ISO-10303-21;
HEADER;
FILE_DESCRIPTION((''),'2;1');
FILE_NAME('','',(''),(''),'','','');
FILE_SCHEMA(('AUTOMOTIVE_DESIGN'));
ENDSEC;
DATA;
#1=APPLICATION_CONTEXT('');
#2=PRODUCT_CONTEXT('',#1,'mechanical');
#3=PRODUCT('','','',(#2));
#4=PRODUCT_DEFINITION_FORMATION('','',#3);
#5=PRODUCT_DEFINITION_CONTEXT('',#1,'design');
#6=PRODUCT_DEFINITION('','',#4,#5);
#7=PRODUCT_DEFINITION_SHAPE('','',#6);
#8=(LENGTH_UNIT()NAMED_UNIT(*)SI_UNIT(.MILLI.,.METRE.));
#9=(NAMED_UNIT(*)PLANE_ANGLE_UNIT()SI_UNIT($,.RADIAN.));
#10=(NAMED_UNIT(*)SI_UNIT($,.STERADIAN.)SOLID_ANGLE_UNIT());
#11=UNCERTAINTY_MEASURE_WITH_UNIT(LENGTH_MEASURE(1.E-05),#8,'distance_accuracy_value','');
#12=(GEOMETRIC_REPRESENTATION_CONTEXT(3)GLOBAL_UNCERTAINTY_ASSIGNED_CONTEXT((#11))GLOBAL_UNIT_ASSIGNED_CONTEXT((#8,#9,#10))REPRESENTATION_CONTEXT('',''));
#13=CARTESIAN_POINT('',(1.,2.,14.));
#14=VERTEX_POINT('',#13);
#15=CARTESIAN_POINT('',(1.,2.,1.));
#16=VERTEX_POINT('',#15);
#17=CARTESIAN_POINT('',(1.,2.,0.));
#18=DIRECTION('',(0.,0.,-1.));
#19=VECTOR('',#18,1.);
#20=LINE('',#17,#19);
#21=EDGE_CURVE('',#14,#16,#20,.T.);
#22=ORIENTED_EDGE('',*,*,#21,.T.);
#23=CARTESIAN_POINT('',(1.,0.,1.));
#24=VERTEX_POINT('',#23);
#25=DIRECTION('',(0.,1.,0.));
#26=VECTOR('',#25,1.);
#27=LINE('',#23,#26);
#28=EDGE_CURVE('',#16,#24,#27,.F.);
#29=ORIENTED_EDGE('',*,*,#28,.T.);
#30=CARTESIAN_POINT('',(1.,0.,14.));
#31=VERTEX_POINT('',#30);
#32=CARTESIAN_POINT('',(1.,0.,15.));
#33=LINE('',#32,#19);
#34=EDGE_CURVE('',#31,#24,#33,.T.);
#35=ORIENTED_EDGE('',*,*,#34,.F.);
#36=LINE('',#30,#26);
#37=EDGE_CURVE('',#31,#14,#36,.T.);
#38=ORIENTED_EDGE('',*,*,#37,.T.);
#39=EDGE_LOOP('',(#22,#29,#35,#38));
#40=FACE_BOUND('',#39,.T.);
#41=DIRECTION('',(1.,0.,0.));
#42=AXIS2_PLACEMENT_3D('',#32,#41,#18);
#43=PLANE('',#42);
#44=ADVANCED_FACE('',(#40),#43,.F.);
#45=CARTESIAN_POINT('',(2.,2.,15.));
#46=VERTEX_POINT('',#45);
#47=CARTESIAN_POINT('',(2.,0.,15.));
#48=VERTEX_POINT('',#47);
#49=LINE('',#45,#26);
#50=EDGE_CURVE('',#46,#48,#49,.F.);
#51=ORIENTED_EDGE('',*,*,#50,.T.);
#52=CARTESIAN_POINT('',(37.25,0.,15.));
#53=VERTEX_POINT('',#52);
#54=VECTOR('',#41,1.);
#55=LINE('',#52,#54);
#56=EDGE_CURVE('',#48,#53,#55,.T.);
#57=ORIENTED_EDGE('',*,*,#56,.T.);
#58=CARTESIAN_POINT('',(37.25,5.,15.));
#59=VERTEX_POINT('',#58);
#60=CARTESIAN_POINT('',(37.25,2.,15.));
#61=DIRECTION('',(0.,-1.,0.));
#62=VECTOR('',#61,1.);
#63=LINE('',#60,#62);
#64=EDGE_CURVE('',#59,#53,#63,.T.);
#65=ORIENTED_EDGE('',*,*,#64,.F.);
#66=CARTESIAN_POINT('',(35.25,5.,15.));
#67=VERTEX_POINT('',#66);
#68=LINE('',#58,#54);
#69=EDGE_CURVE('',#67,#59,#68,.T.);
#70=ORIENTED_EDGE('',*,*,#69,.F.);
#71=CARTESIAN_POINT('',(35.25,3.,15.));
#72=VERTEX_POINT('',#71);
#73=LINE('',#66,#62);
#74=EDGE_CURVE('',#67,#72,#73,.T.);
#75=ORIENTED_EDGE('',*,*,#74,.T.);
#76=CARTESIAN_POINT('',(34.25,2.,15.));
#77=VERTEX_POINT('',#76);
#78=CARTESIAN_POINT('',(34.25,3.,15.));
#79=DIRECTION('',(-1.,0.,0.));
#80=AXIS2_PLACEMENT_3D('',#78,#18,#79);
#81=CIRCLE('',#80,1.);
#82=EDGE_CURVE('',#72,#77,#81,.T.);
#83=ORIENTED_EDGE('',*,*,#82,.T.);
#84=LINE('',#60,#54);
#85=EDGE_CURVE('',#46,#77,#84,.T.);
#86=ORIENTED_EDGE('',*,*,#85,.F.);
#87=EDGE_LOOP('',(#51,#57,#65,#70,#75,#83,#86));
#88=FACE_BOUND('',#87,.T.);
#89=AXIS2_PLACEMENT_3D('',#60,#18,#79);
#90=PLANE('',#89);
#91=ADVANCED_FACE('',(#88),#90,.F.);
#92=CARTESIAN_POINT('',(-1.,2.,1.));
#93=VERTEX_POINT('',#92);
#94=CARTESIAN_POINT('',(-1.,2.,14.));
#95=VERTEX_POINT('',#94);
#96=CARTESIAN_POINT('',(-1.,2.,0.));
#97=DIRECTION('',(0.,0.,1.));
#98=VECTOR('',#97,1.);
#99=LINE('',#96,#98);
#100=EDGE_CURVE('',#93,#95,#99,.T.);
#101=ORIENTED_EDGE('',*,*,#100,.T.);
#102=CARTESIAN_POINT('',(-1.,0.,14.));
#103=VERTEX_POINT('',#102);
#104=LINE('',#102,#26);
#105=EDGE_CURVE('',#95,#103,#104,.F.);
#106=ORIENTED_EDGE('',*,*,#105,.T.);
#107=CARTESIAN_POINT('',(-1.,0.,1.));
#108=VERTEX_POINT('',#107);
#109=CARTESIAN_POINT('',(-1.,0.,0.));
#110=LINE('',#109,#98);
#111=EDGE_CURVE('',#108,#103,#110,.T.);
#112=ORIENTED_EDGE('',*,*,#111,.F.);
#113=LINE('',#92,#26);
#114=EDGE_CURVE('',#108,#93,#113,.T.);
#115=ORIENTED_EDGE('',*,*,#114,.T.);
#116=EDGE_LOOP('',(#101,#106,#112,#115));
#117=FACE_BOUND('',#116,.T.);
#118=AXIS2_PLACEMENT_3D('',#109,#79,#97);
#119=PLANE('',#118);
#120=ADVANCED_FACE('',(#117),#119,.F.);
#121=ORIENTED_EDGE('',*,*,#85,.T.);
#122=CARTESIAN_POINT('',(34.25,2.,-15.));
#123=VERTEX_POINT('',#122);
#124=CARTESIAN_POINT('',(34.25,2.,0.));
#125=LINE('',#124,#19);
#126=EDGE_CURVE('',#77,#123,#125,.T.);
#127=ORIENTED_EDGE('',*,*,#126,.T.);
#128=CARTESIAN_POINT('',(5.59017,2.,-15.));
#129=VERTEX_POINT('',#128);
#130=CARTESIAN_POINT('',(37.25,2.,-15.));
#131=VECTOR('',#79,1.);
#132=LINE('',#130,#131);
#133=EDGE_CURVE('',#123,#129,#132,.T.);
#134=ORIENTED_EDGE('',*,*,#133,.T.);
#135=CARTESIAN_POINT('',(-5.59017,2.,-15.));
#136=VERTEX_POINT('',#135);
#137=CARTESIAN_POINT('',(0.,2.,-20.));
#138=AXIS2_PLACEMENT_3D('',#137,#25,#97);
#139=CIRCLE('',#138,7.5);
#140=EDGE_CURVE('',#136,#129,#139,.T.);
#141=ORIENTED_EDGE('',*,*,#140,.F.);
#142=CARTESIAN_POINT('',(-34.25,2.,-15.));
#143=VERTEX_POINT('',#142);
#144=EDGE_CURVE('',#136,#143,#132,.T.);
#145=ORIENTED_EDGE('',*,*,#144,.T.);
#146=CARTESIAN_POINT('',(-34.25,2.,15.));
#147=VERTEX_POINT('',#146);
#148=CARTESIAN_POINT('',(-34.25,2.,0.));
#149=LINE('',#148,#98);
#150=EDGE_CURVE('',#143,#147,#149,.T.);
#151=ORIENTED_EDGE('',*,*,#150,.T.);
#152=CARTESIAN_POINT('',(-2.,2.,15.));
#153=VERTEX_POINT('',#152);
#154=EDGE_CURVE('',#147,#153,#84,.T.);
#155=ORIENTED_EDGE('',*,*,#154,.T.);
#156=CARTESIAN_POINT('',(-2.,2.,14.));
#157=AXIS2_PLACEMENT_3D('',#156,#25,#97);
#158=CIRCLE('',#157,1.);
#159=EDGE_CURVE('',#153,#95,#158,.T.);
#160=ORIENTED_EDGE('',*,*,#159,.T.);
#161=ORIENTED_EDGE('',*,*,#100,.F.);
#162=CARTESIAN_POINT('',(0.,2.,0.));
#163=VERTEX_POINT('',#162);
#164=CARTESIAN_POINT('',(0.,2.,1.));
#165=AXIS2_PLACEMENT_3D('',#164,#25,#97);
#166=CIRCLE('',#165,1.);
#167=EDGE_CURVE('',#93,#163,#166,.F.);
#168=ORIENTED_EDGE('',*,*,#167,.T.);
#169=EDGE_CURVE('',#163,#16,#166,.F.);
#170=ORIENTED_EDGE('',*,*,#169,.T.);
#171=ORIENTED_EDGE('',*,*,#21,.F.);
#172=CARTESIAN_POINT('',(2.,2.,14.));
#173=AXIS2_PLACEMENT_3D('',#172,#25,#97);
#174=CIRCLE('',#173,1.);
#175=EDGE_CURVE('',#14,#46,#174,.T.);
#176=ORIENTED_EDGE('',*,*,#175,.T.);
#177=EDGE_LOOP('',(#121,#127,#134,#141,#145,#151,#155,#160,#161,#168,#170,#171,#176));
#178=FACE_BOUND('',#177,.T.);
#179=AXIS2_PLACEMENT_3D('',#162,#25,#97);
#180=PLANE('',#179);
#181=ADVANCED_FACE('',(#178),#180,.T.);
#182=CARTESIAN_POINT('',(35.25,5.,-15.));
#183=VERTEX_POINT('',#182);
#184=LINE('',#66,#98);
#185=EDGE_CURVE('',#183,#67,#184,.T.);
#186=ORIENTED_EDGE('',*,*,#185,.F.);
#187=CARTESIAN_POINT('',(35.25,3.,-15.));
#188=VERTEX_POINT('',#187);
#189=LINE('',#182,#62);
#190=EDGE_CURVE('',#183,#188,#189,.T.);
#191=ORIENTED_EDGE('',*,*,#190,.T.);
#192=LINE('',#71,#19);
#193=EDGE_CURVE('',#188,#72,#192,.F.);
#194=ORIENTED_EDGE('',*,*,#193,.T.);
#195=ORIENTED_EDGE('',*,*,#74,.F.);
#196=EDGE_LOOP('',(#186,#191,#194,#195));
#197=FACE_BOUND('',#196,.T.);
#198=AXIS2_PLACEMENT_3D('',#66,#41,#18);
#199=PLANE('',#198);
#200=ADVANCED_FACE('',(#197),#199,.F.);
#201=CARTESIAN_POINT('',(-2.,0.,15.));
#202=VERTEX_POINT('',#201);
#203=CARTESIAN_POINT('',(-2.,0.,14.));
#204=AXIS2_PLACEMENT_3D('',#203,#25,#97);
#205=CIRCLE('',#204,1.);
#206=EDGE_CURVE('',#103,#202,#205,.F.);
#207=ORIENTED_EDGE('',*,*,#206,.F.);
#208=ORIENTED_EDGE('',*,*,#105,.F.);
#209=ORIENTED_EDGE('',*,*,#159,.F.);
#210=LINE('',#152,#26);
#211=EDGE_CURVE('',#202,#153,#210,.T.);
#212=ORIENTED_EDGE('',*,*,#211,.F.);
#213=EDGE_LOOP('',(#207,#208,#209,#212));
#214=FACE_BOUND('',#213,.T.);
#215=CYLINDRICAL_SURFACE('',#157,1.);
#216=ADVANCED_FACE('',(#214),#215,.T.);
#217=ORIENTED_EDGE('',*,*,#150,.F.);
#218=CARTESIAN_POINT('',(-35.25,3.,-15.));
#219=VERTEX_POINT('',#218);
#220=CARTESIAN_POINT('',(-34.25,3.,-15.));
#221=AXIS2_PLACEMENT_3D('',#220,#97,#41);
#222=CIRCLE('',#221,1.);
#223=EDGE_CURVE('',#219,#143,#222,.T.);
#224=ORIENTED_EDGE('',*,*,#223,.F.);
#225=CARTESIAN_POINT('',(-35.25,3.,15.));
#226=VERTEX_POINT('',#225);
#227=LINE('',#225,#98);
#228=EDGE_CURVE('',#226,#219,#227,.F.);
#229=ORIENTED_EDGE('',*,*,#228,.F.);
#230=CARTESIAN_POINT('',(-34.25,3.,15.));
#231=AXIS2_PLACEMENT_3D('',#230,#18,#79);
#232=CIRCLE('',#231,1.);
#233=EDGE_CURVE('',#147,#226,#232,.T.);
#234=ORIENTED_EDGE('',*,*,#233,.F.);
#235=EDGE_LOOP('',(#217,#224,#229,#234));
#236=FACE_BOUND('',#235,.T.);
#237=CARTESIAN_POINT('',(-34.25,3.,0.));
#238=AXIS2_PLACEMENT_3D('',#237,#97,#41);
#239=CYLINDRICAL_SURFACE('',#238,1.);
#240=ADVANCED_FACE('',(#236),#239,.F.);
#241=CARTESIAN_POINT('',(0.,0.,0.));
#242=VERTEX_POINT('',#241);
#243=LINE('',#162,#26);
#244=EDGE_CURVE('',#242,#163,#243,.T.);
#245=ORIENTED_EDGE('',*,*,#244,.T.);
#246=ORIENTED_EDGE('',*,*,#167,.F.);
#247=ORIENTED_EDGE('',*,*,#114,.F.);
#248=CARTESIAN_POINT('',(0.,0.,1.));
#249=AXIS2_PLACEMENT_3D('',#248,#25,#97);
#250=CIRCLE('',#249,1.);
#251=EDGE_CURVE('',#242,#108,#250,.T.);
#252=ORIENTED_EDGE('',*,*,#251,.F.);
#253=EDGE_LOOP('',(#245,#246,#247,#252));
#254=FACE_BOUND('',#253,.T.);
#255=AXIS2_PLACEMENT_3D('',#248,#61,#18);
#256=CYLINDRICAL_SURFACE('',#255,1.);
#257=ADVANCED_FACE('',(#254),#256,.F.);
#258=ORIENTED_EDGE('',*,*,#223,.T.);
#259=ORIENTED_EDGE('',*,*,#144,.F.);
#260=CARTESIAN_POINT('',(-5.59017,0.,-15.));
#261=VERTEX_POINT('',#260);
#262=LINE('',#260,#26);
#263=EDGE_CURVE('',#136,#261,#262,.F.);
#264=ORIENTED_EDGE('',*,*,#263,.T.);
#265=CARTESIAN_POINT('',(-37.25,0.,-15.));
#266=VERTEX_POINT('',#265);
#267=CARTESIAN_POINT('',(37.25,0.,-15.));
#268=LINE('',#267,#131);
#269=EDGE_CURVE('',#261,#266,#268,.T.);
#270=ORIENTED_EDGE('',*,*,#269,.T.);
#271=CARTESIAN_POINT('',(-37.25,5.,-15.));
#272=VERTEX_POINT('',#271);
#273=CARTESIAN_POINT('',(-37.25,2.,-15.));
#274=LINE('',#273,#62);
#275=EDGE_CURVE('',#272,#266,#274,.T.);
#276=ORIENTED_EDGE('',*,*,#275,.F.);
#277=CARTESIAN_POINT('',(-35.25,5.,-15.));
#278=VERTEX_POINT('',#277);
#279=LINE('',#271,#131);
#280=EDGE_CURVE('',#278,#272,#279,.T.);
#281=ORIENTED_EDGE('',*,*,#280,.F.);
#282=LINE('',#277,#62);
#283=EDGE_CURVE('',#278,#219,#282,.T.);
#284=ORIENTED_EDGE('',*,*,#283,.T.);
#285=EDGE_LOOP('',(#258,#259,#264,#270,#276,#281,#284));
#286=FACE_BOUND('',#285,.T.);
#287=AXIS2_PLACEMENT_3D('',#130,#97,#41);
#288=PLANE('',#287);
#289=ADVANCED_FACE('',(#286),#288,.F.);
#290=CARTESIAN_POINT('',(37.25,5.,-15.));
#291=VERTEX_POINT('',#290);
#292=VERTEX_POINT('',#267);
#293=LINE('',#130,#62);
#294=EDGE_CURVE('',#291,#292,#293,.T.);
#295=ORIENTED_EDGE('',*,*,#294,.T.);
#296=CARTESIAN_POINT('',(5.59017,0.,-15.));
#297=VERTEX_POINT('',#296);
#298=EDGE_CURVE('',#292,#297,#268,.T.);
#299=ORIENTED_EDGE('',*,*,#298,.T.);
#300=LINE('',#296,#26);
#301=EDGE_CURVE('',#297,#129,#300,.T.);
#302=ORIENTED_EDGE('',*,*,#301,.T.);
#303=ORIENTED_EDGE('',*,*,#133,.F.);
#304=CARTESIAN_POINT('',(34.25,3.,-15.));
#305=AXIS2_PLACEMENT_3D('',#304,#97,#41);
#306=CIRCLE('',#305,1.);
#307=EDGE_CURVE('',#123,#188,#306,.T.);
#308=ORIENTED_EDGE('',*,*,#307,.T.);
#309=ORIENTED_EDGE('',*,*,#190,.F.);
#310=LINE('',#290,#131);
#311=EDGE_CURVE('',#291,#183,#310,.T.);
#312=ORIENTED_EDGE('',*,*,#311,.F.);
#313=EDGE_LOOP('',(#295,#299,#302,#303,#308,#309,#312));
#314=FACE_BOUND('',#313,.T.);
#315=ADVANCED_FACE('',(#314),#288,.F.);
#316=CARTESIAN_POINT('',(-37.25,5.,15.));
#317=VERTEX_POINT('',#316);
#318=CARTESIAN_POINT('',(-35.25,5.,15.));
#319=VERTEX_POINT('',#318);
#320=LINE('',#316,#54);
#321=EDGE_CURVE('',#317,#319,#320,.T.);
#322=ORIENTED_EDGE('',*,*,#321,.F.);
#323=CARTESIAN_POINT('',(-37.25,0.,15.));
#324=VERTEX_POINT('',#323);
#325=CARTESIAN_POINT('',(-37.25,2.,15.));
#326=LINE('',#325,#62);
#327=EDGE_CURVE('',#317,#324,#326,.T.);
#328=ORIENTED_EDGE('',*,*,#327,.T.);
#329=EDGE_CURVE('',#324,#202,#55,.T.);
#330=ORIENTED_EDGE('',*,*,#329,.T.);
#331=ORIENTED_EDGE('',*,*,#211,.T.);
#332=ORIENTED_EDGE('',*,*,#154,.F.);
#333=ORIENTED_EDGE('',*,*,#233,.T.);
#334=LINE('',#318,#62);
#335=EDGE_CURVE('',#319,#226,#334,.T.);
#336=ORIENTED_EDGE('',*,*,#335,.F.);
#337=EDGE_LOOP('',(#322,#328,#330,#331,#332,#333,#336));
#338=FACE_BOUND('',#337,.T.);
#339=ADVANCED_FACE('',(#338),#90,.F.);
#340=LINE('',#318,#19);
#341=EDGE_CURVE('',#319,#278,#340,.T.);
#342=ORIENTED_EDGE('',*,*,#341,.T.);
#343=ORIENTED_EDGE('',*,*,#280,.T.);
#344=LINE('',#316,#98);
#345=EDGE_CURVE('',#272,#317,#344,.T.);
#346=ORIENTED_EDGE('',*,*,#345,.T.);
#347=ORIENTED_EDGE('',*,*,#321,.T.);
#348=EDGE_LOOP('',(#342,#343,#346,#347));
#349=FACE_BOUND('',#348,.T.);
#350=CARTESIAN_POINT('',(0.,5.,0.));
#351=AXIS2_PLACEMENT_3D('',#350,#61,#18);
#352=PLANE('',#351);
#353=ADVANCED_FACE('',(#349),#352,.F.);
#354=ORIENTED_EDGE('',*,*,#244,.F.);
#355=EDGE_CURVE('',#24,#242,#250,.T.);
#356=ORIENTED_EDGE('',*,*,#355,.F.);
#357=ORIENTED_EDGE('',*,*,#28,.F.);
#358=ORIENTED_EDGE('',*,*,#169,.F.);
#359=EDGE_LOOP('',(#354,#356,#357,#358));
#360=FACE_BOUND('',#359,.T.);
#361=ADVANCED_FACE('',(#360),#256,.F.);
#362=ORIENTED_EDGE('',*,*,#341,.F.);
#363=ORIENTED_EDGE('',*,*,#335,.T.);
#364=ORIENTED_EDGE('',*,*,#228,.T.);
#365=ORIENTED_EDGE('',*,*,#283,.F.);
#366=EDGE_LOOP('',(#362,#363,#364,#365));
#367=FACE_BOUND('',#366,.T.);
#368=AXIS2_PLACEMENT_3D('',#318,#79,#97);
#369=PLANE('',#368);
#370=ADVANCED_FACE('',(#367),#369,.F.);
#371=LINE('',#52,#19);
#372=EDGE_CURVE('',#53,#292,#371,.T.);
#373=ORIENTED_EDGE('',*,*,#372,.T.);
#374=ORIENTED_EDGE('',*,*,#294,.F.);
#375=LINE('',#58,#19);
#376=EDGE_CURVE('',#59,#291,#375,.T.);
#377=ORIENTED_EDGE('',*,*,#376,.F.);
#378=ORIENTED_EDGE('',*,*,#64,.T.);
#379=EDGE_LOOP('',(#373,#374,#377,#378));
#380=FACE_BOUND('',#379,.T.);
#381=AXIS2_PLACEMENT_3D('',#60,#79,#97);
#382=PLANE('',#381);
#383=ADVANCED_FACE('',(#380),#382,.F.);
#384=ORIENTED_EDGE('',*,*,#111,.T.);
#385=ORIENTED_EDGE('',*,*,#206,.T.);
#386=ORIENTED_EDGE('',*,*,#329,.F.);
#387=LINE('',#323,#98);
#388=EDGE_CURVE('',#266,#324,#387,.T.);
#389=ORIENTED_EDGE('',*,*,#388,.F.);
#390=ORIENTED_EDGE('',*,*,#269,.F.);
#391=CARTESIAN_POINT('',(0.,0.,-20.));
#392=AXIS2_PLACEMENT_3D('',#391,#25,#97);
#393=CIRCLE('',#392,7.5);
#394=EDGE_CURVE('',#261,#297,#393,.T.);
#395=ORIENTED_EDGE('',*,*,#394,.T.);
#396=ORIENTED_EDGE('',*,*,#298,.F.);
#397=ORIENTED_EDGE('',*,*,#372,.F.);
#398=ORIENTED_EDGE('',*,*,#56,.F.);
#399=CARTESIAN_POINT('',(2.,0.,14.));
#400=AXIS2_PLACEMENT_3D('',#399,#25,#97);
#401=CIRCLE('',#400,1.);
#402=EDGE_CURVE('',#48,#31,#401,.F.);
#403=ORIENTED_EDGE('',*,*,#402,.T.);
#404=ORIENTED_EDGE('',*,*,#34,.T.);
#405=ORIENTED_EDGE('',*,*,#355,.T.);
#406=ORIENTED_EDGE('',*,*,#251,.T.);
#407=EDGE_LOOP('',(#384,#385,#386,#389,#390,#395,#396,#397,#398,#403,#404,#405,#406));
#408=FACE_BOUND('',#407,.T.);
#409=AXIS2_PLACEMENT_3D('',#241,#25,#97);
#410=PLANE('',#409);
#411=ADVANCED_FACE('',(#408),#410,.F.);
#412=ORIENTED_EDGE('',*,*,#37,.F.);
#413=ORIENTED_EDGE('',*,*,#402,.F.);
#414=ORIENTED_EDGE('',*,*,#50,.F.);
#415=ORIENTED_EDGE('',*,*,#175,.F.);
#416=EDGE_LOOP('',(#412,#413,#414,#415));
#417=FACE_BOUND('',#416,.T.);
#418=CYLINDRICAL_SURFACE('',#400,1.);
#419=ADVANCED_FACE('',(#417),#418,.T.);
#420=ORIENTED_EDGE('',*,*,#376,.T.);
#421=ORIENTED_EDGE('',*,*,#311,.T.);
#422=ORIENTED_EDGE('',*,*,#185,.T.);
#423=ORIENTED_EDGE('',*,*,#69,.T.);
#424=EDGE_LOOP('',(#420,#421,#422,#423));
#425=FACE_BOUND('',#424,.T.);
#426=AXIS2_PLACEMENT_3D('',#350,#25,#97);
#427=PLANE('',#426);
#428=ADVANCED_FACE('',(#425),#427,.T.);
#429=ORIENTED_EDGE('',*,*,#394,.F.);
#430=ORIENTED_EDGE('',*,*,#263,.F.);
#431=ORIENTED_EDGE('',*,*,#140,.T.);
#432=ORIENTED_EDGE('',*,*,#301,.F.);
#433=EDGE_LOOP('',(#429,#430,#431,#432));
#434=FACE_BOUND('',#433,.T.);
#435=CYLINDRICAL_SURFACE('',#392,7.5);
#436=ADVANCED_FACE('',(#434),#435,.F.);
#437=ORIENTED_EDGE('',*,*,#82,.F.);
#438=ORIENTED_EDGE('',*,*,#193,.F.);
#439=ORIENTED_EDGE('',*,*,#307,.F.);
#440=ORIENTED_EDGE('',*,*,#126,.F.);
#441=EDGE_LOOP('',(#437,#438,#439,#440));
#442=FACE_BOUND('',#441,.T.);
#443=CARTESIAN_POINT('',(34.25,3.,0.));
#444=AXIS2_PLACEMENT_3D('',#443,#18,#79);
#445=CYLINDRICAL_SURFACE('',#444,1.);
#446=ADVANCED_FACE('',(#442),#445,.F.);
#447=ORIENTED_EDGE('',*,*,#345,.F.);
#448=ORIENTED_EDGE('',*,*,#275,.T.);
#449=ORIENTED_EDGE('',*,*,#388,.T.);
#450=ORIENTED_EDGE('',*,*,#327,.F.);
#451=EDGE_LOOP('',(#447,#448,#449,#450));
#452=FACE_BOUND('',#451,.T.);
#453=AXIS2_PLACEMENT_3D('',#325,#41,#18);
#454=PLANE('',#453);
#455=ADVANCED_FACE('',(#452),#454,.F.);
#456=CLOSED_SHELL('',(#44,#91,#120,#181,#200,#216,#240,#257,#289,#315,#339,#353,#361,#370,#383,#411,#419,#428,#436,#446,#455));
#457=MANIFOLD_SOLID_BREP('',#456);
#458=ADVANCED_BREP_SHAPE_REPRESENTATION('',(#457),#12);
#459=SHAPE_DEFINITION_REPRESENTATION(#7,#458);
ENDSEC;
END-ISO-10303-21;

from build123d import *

# Parameters (mm, degrees)
SKETCH1_W               = 74.5
SKETCH1_H               = 30
BOSS_EXTRUDE1_DEPTH     = 2
SKETCH4_W               = 2
SKETCH4_H               = 30
BOSS_EXTRUDE2_DEPTH     = 5
CUT_EXTRUDE1_DEPTH      = 41.268629229
CUT_EXTRUDE1_DEPTH_BACK = 41.268629229
SKETCH5_W               = 2
SKETCH5_H               = 15
CUT_EXTRUDE2_DEPTH      = 41.268629229
CUT_EXTRUDE2_DEPTH_BACK = 41.268629229
SKETCH6_R               = 7.5
FILLET1_R               = 1


with BuildPart() as part:
    # Sketch1 → Boss-Extrude1 (new body)
    with BuildSketch(Plane(origin=(0, 0, 0), x_dir=(1, 0, 0), z_dir=(0, 1, 0))):
        Rectangle(SKETCH1_W, SKETCH1_H)
    extrude(amount=BOSS_EXTRUDE1_DEPTH)

    # Sketch4 → Boss-Extrude2 (add)
    with BuildSketch(Plane(origin=(0, 0, 0), x_dir=(1, 0, 0), z_dir=(0, 1, 0))):
        with Locations((36.25, 0)):
            Rectangle(SKETCH4_W, SKETCH4_H)
        with Locations((-36.25, 0)):
            Rectangle(SKETCH4_W, SKETCH4_H)
    extrude(amount=BOSS_EXTRUDE2_DEPTH)

    # Sketch5 → Cut-Extrude1 (cut, two sides: drawn at the far end of the back side and taken through both)
    with BuildSketch(Plane(origin=(0, 2, 0), x_dir=(1, 0, 0), z_dir=(0, 1, 0)).offset(-CUT_EXTRUDE1_DEPTH_BACK)):
        with Locations((0, -7.5)):
            Rectangle(SKETCH5_W, SKETCH5_H)
    extrude(amount=CUT_EXTRUDE1_DEPTH + CUT_EXTRUDE1_DEPTH_BACK, mode=Mode.SUBTRACT)

    # Sketch6 → Cut-Extrude2 (cut, two sides: drawn at the far end of the back side and taken through both)
    with BuildSketch(Plane(origin=(0, 2, 0), x_dir=(1, 0, 0), z_dir=(0, 1, 0)).offset(-CUT_EXTRUDE2_DEPTH_BACK)):
        with Locations((0, 20)):
            Circle(SKETCH6_R)
    extrude(amount=CUT_EXTRUDE2_DEPTH + CUT_EXTRUDE2_DEPTH_BACK, mode=Mode.SUBTRACT)

    # Fillet1
    fillet1_edges = [part.edges().sort_by_distance(p)[0] for p in [
        (1, 1, 15),
        (-1, 1, 15),
        (-1, 1, 0),
        (1, 1, 0),
        (-35.25, 2, 0),
        (35.25, 2, 0),
    ]]
    fillet(fillet1_edges, radius=FILLET1_R - 0.0001)  # a hair under: the kernel refuses the full size


solid = part.part
